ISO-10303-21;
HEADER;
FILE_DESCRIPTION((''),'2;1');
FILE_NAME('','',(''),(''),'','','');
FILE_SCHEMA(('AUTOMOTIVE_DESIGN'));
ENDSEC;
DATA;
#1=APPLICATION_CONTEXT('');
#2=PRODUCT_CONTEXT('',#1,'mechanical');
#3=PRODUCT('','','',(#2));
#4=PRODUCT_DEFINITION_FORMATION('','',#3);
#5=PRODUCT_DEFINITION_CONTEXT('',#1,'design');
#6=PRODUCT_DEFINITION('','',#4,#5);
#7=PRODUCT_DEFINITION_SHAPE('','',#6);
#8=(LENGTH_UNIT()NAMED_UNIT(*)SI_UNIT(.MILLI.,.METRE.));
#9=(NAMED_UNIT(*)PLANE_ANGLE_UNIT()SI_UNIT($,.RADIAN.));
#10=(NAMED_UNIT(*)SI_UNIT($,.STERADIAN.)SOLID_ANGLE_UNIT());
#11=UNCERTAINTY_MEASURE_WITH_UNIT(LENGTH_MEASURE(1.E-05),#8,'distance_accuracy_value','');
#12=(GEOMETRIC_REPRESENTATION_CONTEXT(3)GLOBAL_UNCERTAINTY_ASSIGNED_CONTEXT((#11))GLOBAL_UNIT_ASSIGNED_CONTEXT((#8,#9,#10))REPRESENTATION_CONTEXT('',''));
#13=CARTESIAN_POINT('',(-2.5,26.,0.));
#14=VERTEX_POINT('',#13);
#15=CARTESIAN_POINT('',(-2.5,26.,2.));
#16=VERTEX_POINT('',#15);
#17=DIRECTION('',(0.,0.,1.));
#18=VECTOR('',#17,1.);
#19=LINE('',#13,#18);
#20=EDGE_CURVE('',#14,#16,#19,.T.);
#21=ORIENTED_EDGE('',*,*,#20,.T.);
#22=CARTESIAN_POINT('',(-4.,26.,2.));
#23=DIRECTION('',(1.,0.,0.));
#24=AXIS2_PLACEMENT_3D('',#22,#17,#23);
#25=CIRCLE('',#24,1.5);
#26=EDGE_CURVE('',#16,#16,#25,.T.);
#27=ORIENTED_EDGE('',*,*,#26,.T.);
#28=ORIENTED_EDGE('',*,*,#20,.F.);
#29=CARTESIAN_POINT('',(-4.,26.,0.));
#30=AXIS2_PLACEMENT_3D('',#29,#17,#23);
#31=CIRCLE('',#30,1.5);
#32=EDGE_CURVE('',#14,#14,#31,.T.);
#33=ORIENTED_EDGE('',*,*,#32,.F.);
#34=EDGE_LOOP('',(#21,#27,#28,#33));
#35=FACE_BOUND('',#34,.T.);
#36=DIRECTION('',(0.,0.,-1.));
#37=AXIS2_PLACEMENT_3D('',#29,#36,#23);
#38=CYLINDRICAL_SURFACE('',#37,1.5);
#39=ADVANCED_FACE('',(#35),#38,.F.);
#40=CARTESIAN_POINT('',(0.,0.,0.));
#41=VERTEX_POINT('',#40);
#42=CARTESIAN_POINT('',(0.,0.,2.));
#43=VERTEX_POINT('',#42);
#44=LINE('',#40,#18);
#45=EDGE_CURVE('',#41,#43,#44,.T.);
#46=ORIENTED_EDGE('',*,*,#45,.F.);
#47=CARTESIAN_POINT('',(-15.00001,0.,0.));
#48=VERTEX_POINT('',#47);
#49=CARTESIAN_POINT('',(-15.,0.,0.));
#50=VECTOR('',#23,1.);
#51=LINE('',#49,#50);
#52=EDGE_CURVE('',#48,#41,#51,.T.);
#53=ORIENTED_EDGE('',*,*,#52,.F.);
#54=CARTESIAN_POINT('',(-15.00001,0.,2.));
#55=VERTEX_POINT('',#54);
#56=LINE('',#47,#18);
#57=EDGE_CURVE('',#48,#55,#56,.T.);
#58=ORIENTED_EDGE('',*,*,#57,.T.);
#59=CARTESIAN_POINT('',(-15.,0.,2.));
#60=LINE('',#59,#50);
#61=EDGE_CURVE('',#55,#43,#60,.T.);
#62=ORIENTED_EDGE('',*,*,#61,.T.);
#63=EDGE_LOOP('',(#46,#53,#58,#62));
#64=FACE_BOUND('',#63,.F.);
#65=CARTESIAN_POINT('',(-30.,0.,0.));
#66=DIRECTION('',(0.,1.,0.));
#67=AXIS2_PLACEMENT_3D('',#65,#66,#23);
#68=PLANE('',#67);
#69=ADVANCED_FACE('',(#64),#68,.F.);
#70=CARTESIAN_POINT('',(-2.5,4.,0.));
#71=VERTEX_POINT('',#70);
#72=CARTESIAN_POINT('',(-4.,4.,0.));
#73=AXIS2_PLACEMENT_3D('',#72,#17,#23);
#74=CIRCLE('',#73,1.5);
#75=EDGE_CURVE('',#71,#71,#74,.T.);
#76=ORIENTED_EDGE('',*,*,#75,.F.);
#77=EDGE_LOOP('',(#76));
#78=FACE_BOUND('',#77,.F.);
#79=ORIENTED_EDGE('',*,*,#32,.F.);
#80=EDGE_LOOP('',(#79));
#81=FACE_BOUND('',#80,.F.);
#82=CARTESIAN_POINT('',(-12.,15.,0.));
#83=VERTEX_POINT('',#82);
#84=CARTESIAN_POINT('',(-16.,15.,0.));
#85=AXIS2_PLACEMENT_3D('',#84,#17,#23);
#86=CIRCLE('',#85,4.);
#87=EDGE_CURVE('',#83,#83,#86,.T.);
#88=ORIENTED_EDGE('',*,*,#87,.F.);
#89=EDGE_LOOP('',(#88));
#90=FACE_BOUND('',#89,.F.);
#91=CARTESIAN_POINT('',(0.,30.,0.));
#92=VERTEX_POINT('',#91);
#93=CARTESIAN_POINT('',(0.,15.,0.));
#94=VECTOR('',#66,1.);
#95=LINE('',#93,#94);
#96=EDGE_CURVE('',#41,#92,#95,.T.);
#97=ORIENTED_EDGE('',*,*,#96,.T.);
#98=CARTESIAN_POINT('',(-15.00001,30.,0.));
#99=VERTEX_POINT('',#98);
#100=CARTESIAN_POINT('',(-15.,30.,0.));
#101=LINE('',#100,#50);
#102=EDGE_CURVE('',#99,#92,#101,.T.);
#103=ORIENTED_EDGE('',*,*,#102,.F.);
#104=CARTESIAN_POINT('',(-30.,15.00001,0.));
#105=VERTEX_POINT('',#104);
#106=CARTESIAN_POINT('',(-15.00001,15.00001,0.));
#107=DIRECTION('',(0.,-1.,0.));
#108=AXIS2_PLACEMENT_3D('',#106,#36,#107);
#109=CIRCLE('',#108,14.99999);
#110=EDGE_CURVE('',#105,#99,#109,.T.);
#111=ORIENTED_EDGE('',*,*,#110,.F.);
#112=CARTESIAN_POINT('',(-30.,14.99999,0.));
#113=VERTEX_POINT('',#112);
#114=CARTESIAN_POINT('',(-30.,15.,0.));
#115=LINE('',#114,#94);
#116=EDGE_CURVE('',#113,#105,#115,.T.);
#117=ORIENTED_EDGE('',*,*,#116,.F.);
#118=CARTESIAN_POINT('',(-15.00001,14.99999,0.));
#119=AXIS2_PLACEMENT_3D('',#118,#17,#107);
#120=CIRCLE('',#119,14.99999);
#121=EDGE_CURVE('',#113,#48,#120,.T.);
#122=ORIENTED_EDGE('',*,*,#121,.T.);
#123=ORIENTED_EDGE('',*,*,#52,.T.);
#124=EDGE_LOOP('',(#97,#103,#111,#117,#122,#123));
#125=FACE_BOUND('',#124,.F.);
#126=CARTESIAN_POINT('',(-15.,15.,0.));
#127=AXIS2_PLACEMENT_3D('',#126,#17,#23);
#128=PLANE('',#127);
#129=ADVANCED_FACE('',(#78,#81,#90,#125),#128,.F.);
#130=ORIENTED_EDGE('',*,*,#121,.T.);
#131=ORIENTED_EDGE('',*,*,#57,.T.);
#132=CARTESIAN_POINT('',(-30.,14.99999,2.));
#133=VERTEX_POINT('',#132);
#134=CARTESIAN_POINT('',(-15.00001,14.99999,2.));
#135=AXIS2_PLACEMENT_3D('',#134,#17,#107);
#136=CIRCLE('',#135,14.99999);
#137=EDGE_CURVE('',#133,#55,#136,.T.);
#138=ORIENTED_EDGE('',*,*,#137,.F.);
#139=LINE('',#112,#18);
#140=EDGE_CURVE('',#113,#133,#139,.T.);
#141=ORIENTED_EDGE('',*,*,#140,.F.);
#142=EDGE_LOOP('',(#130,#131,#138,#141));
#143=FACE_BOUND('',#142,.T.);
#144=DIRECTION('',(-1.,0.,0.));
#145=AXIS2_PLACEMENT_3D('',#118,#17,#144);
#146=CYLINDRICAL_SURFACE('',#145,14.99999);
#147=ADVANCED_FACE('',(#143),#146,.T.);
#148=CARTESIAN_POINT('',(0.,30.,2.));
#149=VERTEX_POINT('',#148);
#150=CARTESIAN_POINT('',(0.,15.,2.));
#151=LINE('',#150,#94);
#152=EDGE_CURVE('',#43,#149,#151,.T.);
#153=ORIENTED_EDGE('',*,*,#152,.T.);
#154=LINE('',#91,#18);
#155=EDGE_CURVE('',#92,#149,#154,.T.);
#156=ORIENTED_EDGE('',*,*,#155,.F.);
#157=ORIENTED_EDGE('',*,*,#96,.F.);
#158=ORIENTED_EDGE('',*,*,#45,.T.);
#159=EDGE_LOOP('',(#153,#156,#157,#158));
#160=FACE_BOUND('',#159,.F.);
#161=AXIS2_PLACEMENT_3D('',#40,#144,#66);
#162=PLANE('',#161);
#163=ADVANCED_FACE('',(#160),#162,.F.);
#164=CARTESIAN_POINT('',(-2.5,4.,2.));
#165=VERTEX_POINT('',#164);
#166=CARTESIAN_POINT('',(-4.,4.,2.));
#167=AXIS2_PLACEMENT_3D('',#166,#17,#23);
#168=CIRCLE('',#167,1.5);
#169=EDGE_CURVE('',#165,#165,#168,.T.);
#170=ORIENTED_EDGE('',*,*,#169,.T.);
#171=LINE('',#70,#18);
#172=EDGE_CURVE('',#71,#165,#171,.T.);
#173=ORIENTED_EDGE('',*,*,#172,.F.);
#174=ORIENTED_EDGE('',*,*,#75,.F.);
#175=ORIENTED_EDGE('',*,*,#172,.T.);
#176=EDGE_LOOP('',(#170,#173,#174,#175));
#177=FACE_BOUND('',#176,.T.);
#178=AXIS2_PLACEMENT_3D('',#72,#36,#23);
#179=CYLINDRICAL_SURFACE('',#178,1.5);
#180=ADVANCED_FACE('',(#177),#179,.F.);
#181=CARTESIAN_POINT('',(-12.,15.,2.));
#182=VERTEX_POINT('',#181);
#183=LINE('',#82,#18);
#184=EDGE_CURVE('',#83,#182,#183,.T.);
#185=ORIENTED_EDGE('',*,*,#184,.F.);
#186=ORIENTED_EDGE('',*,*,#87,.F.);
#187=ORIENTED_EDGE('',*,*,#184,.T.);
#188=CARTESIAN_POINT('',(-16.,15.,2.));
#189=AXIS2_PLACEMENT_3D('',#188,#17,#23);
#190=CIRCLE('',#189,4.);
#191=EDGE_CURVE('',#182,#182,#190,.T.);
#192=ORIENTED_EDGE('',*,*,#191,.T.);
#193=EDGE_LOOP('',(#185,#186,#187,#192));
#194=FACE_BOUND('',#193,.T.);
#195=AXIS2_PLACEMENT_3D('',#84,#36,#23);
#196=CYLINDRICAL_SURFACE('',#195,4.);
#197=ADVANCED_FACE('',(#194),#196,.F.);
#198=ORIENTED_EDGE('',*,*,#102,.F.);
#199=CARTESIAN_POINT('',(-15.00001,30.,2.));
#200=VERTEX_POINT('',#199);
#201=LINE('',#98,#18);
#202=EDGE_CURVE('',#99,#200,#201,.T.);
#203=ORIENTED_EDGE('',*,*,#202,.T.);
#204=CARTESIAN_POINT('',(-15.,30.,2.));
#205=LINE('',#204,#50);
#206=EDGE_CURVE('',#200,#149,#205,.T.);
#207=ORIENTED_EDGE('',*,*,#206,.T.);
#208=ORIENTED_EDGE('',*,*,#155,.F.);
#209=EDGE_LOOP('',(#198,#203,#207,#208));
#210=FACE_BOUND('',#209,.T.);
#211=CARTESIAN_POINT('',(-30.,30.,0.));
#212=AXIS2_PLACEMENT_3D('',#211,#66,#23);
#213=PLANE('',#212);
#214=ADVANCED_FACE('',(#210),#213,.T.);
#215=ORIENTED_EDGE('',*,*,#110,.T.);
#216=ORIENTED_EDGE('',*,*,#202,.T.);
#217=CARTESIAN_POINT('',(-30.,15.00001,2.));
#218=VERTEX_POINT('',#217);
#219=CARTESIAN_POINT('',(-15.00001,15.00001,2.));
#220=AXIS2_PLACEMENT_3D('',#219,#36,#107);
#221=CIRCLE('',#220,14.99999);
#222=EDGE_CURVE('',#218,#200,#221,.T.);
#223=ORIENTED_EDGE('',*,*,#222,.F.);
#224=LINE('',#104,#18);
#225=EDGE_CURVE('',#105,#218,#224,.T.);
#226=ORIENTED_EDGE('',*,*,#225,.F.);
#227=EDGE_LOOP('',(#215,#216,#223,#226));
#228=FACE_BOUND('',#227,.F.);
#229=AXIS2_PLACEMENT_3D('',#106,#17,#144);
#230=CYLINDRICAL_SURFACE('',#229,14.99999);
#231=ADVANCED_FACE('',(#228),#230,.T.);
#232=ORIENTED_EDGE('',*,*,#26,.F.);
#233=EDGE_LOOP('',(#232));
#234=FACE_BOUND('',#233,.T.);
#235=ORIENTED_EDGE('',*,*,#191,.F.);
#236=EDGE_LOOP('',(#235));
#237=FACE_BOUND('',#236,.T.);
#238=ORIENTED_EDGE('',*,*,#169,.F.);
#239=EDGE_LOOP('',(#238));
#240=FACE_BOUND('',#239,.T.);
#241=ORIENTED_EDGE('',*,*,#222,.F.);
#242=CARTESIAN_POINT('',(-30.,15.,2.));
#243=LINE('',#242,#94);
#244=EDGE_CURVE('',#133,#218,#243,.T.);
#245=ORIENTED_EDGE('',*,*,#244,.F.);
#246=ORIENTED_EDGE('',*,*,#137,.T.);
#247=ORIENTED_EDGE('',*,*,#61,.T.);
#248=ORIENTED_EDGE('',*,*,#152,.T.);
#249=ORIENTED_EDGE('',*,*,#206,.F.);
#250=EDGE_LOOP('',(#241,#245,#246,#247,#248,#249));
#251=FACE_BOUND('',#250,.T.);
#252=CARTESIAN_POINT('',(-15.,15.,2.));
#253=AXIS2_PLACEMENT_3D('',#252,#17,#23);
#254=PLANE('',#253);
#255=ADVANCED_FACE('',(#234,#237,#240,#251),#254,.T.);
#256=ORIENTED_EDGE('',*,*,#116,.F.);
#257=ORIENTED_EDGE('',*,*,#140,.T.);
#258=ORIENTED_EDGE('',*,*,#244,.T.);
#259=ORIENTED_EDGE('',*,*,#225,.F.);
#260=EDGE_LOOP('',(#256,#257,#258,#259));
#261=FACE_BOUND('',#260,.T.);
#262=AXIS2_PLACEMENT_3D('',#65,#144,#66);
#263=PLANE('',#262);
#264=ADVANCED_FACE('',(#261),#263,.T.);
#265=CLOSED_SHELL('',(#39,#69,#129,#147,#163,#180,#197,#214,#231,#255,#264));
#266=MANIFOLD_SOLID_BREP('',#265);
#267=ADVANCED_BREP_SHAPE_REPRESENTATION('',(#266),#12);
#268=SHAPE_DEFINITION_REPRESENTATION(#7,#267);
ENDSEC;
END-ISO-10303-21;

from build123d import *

# Parameters (mm, degrees)
F0_W     = 30
F0_H     = 30
F0_R     = 1.5
F0_R_2   = 4
F1_DEPTH = 2
F2_R     = 14.99999


# Not quite as in the source:
# - a fillet or chamfer is up to 0.001 mm smaller than in the source, because OpenCascade refuses the exact size


with BuildPart() as f1:
    # F0 (on Top) → F1 (new body)
    with BuildSketch(Plane.XY):
        with Locations((-15, 15)):
            Rectangle(F0_W, F0_H)
        with Locations((-4, 4)):
            Circle(F0_R, mode=Mode.SUBTRACT)
        with Locations((-16, 15)):
            Circle(F0_R_2, mode=Mode.SUBTRACT)
        with Locations((-4, 26)):
            Circle(F0_R, mode=Mode.SUBTRACT)
    extrude(amount=F1_DEPTH)

    # F2 (radius 15 in the source; OpenCascade refuses exactly that, so slightly less here)
    f2_edges = [f1.edges().sort_by_distance(p)[0] for p in [
        (-30, 0, 1),
        (-30, 30, 1),
    ]]
    fillet(f2_edges, radius=F2_R)


solid = f1.part
